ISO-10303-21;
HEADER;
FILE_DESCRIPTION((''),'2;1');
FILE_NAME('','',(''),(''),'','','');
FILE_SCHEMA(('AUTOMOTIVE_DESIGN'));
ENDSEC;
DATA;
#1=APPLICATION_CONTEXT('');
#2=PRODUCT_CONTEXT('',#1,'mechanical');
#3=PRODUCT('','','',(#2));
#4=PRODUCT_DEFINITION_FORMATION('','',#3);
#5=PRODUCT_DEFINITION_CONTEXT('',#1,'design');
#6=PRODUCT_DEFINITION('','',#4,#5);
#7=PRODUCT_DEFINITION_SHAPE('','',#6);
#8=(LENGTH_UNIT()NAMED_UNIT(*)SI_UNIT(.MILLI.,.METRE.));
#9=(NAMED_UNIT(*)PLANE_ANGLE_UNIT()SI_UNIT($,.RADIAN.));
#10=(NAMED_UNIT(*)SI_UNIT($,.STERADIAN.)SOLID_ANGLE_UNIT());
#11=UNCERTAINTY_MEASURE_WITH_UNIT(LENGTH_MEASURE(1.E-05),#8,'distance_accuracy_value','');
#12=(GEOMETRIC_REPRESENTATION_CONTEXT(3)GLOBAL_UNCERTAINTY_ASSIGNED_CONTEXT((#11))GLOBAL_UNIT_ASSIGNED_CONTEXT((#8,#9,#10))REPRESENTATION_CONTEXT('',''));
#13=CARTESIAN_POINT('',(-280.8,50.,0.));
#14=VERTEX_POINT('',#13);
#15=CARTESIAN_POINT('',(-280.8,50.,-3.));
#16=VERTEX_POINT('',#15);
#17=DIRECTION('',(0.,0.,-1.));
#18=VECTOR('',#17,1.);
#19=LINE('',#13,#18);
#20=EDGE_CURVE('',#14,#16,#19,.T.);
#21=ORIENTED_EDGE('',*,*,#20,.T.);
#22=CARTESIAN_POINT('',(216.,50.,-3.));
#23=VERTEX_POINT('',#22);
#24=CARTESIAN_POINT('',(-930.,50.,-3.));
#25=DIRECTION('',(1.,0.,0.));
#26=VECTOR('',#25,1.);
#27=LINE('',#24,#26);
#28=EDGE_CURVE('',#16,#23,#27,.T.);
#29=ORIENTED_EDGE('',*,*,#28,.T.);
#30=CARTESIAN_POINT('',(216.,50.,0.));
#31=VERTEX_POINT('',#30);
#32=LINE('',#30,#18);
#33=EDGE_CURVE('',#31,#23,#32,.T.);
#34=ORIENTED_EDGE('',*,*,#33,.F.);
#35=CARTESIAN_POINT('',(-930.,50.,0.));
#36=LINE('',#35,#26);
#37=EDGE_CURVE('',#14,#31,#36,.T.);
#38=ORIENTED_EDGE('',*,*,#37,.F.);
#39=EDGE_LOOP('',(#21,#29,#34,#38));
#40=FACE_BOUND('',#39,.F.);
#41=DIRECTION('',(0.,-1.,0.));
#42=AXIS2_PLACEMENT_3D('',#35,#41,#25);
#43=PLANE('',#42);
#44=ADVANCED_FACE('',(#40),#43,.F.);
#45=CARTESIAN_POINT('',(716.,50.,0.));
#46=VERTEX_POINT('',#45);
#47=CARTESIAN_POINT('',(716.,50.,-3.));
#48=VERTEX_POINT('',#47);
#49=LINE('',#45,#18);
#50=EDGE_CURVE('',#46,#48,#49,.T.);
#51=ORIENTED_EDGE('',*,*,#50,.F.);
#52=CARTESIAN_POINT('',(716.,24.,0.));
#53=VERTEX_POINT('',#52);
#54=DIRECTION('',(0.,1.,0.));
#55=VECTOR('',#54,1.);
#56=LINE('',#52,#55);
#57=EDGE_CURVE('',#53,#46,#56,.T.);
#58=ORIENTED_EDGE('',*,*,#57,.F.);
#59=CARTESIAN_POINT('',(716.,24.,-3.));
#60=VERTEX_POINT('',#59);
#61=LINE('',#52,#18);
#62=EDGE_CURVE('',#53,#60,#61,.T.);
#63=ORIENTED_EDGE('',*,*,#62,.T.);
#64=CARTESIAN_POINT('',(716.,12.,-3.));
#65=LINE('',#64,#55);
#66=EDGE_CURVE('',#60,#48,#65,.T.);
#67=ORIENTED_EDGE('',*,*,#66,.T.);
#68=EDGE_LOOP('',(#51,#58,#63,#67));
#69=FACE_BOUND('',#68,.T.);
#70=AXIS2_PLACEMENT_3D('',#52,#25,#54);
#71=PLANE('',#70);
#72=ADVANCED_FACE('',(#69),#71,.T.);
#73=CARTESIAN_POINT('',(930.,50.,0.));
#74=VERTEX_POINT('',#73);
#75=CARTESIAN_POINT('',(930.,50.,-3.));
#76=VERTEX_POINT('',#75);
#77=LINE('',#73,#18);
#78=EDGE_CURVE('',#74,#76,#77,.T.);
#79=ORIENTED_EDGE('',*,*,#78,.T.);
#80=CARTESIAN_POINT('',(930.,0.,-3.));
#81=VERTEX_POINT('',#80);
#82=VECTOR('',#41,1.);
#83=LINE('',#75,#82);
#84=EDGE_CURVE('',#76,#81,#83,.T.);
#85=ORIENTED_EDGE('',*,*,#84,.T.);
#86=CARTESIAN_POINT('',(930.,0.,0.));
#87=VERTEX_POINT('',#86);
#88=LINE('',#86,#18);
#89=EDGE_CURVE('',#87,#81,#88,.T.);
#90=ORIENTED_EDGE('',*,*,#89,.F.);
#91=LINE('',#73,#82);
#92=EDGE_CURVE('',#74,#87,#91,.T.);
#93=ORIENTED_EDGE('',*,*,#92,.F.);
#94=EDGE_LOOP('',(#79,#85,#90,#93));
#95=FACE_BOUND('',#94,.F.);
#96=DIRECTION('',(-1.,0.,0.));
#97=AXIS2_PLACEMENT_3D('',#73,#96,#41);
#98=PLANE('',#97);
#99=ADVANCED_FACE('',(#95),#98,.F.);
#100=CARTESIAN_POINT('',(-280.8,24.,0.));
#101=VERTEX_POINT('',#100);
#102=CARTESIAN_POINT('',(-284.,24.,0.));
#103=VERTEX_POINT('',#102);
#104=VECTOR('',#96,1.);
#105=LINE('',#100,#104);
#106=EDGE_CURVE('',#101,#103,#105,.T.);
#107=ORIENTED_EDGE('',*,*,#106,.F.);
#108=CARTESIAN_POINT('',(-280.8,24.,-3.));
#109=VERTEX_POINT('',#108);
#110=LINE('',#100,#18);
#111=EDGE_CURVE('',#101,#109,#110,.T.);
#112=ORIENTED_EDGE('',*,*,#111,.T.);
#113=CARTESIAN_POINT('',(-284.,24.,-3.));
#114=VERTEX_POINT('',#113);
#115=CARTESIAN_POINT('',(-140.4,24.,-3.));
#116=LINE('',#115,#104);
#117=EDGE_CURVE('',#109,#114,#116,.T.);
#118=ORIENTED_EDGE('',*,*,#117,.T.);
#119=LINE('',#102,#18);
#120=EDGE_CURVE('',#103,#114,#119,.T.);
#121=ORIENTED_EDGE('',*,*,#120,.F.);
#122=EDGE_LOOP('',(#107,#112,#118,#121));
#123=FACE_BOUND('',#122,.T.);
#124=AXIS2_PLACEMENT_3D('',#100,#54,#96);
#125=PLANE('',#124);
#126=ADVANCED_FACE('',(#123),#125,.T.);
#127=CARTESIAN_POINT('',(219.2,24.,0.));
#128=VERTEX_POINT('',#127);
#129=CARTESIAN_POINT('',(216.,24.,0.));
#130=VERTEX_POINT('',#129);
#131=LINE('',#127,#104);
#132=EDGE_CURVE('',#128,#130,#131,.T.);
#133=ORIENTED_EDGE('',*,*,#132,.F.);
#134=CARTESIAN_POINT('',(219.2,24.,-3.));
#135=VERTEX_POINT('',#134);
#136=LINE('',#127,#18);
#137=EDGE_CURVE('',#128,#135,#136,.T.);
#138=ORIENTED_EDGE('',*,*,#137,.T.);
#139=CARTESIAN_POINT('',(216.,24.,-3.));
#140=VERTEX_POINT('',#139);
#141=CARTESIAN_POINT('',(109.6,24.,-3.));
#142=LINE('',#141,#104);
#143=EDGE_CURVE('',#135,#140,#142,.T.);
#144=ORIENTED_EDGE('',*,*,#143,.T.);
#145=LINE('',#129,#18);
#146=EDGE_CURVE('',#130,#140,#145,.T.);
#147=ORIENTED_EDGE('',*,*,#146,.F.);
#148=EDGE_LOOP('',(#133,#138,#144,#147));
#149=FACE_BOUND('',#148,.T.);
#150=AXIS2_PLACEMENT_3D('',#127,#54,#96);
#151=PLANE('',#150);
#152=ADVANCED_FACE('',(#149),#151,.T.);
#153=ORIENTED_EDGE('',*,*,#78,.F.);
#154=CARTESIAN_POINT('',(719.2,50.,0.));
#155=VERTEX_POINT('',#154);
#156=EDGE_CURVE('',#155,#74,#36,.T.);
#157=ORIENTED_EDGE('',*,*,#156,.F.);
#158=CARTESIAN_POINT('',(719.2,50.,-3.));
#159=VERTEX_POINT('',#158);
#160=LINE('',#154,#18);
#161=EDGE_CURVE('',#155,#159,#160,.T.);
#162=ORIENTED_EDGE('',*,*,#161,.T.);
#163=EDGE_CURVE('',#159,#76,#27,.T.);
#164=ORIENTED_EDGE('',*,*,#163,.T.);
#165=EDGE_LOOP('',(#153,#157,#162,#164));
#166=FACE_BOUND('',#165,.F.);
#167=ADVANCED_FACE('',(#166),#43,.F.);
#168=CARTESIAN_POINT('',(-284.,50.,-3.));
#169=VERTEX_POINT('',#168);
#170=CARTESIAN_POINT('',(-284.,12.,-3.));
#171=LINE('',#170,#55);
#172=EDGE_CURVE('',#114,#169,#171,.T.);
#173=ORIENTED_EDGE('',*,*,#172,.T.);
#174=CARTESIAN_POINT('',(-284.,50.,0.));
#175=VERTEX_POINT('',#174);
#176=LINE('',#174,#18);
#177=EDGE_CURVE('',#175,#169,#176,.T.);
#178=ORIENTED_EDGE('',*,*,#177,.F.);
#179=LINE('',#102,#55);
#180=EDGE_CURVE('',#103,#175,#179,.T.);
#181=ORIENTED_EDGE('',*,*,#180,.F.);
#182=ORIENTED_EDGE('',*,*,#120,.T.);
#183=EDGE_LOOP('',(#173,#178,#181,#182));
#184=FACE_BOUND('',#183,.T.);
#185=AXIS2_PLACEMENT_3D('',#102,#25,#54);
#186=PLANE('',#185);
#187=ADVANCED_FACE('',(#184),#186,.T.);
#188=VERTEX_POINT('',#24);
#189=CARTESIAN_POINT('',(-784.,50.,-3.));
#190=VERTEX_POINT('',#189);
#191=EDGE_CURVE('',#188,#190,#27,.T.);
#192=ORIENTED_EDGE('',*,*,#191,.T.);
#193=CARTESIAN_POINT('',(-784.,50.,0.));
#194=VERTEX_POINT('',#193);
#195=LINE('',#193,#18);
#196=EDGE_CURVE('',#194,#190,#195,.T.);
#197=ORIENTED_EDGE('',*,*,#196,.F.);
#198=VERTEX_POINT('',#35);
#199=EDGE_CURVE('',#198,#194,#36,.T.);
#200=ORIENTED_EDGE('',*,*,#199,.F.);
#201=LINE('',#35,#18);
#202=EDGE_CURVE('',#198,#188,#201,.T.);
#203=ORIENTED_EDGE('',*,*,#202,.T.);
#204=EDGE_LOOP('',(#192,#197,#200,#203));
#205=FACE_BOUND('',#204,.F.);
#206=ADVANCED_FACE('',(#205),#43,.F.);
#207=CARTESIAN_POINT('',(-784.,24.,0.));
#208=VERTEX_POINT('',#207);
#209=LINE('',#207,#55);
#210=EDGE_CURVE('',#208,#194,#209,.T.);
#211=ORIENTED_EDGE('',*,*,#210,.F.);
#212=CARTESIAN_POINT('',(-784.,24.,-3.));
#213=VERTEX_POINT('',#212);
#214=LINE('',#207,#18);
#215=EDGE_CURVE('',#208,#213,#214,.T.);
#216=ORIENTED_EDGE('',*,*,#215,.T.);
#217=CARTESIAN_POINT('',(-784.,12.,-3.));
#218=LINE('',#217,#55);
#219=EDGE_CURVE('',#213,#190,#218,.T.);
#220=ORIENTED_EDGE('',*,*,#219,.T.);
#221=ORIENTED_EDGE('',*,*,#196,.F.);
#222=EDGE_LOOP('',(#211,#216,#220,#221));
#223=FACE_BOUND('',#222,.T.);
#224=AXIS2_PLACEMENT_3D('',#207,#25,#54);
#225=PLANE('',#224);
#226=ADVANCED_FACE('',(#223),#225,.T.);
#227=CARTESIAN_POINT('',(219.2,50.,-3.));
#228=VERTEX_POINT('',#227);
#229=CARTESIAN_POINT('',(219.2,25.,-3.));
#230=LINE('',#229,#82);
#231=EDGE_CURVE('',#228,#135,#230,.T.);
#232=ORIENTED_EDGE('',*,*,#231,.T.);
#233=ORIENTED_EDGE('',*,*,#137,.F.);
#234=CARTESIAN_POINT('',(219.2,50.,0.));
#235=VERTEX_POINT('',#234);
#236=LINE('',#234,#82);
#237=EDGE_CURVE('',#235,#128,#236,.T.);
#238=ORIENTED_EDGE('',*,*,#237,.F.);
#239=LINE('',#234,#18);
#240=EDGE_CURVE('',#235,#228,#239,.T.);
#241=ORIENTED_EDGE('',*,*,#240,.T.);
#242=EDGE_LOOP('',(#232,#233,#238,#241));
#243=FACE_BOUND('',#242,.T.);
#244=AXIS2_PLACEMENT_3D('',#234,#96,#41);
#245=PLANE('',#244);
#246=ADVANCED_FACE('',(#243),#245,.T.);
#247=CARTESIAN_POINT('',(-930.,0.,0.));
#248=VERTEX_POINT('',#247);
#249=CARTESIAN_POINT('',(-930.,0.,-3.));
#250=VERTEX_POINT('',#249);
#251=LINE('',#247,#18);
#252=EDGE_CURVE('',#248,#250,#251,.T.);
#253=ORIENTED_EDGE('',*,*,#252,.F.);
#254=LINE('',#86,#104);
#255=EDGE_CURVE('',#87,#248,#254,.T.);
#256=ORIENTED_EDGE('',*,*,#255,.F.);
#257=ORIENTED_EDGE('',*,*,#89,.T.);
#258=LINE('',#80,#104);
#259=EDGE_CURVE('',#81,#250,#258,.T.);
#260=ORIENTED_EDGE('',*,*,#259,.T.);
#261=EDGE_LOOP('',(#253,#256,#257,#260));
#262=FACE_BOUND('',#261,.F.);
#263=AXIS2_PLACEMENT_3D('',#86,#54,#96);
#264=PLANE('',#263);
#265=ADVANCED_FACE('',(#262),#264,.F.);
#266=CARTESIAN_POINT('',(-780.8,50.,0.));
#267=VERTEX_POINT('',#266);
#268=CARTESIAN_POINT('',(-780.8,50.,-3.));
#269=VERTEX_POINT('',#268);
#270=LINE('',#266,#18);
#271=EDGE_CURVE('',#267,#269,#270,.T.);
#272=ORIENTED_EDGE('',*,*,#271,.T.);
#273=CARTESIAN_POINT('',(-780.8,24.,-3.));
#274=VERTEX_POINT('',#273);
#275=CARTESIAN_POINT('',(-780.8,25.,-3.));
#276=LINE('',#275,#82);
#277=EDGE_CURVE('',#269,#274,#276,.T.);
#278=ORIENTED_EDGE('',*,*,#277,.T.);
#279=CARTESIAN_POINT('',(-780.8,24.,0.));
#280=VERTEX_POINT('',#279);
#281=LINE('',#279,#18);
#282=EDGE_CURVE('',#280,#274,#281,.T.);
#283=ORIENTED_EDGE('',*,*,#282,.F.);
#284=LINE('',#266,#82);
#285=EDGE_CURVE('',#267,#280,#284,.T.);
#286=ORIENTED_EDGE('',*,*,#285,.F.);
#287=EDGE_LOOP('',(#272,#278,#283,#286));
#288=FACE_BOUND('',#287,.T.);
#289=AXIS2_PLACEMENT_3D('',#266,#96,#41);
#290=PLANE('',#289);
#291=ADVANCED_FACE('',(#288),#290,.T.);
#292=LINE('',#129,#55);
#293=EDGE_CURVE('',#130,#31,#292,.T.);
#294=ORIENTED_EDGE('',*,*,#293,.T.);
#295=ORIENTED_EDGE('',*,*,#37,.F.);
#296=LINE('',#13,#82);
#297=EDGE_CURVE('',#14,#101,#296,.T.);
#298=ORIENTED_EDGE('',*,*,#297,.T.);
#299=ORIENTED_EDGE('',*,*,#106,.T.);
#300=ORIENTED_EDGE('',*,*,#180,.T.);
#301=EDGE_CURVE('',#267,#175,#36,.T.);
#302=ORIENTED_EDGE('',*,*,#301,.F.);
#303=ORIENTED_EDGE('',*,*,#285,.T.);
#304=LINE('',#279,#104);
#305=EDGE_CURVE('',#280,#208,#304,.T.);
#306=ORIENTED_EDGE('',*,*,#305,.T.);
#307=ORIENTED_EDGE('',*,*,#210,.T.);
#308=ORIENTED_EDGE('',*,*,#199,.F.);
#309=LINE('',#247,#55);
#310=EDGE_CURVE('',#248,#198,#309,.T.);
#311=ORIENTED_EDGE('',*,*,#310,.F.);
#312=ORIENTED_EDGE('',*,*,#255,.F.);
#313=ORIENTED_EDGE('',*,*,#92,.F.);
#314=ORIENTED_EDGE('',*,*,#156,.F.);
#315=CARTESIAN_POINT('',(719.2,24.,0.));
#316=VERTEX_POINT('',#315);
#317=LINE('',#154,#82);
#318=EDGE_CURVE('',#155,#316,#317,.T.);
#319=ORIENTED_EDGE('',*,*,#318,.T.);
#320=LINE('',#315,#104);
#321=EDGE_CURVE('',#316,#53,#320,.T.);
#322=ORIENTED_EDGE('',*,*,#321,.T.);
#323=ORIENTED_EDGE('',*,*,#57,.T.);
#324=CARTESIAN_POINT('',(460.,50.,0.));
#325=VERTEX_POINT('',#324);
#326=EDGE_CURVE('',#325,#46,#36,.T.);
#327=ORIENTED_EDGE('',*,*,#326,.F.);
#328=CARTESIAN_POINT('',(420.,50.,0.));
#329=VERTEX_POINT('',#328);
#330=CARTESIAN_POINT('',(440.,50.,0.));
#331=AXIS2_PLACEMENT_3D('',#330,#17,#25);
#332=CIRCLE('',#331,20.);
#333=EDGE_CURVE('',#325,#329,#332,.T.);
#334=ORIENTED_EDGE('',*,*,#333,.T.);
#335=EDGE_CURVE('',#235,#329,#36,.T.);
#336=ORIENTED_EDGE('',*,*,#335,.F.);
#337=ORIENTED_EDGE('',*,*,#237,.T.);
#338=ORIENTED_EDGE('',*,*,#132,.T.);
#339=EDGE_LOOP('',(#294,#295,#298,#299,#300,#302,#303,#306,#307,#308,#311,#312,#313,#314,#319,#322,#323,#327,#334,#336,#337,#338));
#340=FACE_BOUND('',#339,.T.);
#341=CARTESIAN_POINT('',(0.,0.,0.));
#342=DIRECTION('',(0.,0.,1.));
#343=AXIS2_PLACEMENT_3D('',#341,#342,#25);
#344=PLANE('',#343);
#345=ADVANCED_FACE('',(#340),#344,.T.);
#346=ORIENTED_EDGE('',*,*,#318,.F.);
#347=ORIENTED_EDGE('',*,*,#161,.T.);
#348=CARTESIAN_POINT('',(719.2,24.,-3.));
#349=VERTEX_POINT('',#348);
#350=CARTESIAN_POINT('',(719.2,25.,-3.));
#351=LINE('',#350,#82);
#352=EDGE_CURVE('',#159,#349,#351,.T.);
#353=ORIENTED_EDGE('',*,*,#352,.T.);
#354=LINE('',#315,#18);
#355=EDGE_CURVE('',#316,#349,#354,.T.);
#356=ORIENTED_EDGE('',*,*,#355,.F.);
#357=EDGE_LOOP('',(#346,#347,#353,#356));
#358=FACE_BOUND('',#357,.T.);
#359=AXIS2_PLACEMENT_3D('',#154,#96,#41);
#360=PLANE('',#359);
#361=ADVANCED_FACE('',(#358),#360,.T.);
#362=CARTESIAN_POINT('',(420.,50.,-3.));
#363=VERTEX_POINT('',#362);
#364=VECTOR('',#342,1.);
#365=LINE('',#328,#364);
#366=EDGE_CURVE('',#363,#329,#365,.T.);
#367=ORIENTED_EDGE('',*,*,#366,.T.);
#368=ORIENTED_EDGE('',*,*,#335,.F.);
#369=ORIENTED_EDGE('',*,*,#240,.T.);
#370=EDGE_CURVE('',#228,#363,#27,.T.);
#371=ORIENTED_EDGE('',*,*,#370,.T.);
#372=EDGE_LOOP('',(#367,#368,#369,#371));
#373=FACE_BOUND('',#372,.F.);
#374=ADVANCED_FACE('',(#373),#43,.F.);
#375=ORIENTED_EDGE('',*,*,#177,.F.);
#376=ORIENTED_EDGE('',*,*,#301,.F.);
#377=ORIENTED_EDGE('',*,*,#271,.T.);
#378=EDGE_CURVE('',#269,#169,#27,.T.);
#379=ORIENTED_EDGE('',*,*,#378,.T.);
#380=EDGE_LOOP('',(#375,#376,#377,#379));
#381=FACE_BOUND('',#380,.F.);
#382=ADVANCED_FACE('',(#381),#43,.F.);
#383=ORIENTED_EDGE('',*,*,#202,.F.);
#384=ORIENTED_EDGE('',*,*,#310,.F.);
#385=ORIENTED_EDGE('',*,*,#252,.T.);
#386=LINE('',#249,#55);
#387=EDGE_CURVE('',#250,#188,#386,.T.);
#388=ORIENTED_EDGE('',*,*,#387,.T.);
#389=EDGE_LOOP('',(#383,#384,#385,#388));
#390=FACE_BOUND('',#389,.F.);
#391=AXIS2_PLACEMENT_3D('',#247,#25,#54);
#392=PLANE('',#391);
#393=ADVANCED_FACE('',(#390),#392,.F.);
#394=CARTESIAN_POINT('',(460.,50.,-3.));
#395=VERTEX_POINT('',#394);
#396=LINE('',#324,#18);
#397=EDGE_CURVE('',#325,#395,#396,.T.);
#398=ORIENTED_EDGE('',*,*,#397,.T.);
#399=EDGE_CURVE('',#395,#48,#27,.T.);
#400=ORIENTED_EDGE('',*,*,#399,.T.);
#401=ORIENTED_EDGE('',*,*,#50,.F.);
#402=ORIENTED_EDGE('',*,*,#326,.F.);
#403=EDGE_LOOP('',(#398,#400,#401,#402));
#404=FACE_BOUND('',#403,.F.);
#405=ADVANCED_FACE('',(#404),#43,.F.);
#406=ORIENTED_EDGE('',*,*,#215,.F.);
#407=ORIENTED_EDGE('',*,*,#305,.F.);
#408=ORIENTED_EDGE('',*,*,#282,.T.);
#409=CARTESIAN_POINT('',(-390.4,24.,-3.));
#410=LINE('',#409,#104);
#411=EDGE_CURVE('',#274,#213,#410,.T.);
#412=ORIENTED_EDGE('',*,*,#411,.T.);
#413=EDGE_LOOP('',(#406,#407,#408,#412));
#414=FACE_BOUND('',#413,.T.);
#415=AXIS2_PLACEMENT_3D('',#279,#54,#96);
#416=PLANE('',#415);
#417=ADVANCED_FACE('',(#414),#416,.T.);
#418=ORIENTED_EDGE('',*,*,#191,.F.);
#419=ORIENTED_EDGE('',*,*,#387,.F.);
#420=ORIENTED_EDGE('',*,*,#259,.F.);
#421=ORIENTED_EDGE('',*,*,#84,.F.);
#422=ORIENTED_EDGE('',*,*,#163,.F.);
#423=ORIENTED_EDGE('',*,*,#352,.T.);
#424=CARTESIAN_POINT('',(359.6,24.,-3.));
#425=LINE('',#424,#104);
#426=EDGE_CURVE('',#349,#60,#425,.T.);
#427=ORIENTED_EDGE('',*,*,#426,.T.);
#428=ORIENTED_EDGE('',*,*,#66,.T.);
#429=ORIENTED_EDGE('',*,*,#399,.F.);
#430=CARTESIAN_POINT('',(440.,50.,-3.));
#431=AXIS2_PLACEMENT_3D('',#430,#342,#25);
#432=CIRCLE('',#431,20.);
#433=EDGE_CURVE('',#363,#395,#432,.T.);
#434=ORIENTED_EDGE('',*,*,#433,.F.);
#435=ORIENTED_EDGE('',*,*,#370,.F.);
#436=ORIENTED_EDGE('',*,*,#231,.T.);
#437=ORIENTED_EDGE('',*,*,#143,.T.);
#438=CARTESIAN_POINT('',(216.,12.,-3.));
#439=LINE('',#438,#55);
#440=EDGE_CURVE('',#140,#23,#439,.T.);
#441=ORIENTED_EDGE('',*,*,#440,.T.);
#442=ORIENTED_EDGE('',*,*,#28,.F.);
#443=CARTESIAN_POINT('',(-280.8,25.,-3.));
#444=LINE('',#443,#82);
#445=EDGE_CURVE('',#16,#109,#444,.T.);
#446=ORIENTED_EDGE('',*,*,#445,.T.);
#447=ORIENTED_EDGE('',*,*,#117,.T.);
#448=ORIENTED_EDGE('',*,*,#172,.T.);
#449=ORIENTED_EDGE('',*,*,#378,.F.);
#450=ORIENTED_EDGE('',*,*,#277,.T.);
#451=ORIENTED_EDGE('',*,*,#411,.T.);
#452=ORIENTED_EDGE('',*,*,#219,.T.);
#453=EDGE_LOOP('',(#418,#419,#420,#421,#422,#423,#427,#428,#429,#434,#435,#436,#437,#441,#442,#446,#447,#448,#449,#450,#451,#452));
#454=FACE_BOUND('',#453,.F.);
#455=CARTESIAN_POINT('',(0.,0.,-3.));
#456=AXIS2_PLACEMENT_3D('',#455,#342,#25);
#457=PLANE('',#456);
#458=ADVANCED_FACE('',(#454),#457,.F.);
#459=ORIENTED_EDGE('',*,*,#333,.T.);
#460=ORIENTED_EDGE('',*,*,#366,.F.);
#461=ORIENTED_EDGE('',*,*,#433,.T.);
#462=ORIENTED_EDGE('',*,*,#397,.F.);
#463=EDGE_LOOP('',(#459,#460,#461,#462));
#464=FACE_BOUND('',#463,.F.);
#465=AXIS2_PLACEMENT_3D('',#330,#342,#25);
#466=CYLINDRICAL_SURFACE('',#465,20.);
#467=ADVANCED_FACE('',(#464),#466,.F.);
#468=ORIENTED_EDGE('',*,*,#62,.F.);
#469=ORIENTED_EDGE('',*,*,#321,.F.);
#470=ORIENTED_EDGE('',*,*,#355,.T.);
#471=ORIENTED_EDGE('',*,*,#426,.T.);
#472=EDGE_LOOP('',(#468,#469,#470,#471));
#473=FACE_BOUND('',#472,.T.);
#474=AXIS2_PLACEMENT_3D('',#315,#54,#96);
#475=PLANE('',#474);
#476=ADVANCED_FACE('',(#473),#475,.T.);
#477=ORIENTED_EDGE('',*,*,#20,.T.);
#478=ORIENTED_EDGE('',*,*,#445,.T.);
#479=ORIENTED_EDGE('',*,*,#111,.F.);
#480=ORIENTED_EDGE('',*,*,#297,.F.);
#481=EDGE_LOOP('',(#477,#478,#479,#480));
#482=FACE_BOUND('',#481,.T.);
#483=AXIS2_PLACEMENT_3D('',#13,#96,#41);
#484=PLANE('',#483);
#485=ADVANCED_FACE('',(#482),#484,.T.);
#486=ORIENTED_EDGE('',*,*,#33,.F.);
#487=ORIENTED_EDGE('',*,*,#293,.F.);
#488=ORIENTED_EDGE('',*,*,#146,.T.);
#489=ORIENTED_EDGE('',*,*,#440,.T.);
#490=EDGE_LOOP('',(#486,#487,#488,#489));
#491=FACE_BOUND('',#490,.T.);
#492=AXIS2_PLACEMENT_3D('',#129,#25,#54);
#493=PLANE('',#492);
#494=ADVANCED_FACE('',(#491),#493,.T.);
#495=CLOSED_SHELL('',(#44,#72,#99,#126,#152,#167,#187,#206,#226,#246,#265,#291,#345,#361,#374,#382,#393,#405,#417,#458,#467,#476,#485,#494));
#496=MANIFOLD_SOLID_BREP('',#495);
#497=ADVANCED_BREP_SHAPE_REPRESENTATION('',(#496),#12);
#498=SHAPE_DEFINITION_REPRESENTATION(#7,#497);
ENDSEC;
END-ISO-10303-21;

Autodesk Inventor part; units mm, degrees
ref_plane "YZ Plane" through (0, 0, 0) normal (1, 0, 0) x (0, 1, 0)
ref_plane "XZ Plane" through (0, 0, 0) normal (0, 1, 0) x (-1, 0, 0)
ref_plane "XY Plane" through (0, 0, 0) normal (0, 0, 1) x (1, 0, 0)
sketch "Sketch8" plane through (0, 0, 0) normal (0, 0, 1) x (1, 0, 0)
  line L0 (-930, 50) -> (930, 50)
  line L1 (930, 50) -> (930, 0)
  line L2 (930, 0) -> (-930, 0)
  line L3 (-930, 0) -> (-930, 50)
  point P0 (0, 0)
  point P1 (0, 0)
  dimension "d37" = 50
  dimension "d38" = 1860
extrude "Plate5" add sketch "Sketch8" against normal blind 3
sketch "Sketch9" plane through (0, 0, 0) normal (0, 0, 1) x (1, 0, 0)
  line L0 (930, 50) -> (-930, 50) projected
  line L1 (-784, 50) -> (-780.8, 50)
  line L2 (-780.8, 50) -> (-780.8, 24)
  line L3 (-780.8, 24) -> (-784, 24)
  line L4 (-784, 24) -> (-784, 50)
  line L5 (-930, 50) -> (-930, 0) projected
  point P0 (0, 0)
  point P1 (-780.8, 50)
  dimension "d42" = 146
  dimension "d43" = 3.2
  dimension "d44" = 26
extrude "Extrusion3" cut sketch "Sketch9" against normal through all
pattern_linear "Rectangular Pattern2" count 6 spacing 500 along (1, 0, 0) of "Extrusion3"
sketch "Sketch10" plane through (0, 0, 0) normal (0, 0, 1) x (1, 0, 0)
  line L0 (930, 50) -> (719.2, 50) projected
  line L1 (719.2, 50) -> (719.2, 24) projected
  line L2 (719.2, 24) -> (716, 24) projected
  line L3 (716, 24) -> (716, 50) projected
  line L4 (716, 50) -> (219.2, 50) projected
  line L5 (219.2, 50) -> (219.2, 24) projected
  line L6 (219.2, 24) -> (216, 24) projected
  line L7 (216, 24) -> (216, 50) projected
  line L8 (216, 50) -> (-280.8, 50) projected
  line L9 (-280.8, 50) -> (-280.8, 24) projected
  line L10 (-280.8, 24) -> (-284, 24) projected
  line L11 (-284, 24) -> (-284, 50) projected
  line L12 (-284, 50) -> (-780.8, 50) projected
  line L13 (-780.8, 50) -> (-780.8, 24) projected
  line L14 (-780.8, 24) -> (-784, 24) projected
  line L15 (-784, 24) -> (-784, 50) projected
  line L16 (-784, 50) -> (-930, 50) projected
  line L17 (-930, 50) -> (-930, 0) projected
  line L18 (-930, 0) -> (930, 0) projected
  line L19 (930, 0) -> (930, 50) projected
  circle A0 centre (440, 50) radius 20
  point P0 (0, 0)
  point P1 (420, 50)
  point P2 (460, 50)
  point P3 (50, 50)
  point P4 (90, 50)
  dimension "d50" = 40
  dimension "d52" = 1370
extrude "Extrusion4" cut sketch "Sketch10" against normal through all contours A0 L4 | L4 A0
sketch "Sketch11" plane through (0, 0, 0) normal (0, 0, 1) x (1, 0, 0)
  line L0 (-752.5883, 29.3223) -> (-521.0772, 29.3223) construction
  line L1 (-521.0772, 29.3223) -> (-521.0772, 13.038) construction
  line L2 (-521.0772, 13.038) -> (-752.5883, 13.038) construction
  line L3 (-752.5883, 13.038) -> (-752.5883, 29.3223) construction
  point P0 (0, 0)
mark "Mark1"
equation "\"d41\" = Thickness"
equation "\"BendReliefWidth\" = Thickness"
equation "\"BendReliefDepth\" = 0.5 * Thickness"
equation "\"CornerReliefSize\" = 4 * Thickness"
equation "\"MinimumRemnant\" = 2 * Thickness"
equation "\"TransitionRadius\" = BendRadius"
equation "\"JacobiRadiusSize\" = BendRadius"
equation "\"GapSize\" = Thickness"
equation "\"Thickness\" = 3"
equation "\"BendRadius\" = 5"
properties part number "BSH 033 stringer floor 3" material "09g2s"
